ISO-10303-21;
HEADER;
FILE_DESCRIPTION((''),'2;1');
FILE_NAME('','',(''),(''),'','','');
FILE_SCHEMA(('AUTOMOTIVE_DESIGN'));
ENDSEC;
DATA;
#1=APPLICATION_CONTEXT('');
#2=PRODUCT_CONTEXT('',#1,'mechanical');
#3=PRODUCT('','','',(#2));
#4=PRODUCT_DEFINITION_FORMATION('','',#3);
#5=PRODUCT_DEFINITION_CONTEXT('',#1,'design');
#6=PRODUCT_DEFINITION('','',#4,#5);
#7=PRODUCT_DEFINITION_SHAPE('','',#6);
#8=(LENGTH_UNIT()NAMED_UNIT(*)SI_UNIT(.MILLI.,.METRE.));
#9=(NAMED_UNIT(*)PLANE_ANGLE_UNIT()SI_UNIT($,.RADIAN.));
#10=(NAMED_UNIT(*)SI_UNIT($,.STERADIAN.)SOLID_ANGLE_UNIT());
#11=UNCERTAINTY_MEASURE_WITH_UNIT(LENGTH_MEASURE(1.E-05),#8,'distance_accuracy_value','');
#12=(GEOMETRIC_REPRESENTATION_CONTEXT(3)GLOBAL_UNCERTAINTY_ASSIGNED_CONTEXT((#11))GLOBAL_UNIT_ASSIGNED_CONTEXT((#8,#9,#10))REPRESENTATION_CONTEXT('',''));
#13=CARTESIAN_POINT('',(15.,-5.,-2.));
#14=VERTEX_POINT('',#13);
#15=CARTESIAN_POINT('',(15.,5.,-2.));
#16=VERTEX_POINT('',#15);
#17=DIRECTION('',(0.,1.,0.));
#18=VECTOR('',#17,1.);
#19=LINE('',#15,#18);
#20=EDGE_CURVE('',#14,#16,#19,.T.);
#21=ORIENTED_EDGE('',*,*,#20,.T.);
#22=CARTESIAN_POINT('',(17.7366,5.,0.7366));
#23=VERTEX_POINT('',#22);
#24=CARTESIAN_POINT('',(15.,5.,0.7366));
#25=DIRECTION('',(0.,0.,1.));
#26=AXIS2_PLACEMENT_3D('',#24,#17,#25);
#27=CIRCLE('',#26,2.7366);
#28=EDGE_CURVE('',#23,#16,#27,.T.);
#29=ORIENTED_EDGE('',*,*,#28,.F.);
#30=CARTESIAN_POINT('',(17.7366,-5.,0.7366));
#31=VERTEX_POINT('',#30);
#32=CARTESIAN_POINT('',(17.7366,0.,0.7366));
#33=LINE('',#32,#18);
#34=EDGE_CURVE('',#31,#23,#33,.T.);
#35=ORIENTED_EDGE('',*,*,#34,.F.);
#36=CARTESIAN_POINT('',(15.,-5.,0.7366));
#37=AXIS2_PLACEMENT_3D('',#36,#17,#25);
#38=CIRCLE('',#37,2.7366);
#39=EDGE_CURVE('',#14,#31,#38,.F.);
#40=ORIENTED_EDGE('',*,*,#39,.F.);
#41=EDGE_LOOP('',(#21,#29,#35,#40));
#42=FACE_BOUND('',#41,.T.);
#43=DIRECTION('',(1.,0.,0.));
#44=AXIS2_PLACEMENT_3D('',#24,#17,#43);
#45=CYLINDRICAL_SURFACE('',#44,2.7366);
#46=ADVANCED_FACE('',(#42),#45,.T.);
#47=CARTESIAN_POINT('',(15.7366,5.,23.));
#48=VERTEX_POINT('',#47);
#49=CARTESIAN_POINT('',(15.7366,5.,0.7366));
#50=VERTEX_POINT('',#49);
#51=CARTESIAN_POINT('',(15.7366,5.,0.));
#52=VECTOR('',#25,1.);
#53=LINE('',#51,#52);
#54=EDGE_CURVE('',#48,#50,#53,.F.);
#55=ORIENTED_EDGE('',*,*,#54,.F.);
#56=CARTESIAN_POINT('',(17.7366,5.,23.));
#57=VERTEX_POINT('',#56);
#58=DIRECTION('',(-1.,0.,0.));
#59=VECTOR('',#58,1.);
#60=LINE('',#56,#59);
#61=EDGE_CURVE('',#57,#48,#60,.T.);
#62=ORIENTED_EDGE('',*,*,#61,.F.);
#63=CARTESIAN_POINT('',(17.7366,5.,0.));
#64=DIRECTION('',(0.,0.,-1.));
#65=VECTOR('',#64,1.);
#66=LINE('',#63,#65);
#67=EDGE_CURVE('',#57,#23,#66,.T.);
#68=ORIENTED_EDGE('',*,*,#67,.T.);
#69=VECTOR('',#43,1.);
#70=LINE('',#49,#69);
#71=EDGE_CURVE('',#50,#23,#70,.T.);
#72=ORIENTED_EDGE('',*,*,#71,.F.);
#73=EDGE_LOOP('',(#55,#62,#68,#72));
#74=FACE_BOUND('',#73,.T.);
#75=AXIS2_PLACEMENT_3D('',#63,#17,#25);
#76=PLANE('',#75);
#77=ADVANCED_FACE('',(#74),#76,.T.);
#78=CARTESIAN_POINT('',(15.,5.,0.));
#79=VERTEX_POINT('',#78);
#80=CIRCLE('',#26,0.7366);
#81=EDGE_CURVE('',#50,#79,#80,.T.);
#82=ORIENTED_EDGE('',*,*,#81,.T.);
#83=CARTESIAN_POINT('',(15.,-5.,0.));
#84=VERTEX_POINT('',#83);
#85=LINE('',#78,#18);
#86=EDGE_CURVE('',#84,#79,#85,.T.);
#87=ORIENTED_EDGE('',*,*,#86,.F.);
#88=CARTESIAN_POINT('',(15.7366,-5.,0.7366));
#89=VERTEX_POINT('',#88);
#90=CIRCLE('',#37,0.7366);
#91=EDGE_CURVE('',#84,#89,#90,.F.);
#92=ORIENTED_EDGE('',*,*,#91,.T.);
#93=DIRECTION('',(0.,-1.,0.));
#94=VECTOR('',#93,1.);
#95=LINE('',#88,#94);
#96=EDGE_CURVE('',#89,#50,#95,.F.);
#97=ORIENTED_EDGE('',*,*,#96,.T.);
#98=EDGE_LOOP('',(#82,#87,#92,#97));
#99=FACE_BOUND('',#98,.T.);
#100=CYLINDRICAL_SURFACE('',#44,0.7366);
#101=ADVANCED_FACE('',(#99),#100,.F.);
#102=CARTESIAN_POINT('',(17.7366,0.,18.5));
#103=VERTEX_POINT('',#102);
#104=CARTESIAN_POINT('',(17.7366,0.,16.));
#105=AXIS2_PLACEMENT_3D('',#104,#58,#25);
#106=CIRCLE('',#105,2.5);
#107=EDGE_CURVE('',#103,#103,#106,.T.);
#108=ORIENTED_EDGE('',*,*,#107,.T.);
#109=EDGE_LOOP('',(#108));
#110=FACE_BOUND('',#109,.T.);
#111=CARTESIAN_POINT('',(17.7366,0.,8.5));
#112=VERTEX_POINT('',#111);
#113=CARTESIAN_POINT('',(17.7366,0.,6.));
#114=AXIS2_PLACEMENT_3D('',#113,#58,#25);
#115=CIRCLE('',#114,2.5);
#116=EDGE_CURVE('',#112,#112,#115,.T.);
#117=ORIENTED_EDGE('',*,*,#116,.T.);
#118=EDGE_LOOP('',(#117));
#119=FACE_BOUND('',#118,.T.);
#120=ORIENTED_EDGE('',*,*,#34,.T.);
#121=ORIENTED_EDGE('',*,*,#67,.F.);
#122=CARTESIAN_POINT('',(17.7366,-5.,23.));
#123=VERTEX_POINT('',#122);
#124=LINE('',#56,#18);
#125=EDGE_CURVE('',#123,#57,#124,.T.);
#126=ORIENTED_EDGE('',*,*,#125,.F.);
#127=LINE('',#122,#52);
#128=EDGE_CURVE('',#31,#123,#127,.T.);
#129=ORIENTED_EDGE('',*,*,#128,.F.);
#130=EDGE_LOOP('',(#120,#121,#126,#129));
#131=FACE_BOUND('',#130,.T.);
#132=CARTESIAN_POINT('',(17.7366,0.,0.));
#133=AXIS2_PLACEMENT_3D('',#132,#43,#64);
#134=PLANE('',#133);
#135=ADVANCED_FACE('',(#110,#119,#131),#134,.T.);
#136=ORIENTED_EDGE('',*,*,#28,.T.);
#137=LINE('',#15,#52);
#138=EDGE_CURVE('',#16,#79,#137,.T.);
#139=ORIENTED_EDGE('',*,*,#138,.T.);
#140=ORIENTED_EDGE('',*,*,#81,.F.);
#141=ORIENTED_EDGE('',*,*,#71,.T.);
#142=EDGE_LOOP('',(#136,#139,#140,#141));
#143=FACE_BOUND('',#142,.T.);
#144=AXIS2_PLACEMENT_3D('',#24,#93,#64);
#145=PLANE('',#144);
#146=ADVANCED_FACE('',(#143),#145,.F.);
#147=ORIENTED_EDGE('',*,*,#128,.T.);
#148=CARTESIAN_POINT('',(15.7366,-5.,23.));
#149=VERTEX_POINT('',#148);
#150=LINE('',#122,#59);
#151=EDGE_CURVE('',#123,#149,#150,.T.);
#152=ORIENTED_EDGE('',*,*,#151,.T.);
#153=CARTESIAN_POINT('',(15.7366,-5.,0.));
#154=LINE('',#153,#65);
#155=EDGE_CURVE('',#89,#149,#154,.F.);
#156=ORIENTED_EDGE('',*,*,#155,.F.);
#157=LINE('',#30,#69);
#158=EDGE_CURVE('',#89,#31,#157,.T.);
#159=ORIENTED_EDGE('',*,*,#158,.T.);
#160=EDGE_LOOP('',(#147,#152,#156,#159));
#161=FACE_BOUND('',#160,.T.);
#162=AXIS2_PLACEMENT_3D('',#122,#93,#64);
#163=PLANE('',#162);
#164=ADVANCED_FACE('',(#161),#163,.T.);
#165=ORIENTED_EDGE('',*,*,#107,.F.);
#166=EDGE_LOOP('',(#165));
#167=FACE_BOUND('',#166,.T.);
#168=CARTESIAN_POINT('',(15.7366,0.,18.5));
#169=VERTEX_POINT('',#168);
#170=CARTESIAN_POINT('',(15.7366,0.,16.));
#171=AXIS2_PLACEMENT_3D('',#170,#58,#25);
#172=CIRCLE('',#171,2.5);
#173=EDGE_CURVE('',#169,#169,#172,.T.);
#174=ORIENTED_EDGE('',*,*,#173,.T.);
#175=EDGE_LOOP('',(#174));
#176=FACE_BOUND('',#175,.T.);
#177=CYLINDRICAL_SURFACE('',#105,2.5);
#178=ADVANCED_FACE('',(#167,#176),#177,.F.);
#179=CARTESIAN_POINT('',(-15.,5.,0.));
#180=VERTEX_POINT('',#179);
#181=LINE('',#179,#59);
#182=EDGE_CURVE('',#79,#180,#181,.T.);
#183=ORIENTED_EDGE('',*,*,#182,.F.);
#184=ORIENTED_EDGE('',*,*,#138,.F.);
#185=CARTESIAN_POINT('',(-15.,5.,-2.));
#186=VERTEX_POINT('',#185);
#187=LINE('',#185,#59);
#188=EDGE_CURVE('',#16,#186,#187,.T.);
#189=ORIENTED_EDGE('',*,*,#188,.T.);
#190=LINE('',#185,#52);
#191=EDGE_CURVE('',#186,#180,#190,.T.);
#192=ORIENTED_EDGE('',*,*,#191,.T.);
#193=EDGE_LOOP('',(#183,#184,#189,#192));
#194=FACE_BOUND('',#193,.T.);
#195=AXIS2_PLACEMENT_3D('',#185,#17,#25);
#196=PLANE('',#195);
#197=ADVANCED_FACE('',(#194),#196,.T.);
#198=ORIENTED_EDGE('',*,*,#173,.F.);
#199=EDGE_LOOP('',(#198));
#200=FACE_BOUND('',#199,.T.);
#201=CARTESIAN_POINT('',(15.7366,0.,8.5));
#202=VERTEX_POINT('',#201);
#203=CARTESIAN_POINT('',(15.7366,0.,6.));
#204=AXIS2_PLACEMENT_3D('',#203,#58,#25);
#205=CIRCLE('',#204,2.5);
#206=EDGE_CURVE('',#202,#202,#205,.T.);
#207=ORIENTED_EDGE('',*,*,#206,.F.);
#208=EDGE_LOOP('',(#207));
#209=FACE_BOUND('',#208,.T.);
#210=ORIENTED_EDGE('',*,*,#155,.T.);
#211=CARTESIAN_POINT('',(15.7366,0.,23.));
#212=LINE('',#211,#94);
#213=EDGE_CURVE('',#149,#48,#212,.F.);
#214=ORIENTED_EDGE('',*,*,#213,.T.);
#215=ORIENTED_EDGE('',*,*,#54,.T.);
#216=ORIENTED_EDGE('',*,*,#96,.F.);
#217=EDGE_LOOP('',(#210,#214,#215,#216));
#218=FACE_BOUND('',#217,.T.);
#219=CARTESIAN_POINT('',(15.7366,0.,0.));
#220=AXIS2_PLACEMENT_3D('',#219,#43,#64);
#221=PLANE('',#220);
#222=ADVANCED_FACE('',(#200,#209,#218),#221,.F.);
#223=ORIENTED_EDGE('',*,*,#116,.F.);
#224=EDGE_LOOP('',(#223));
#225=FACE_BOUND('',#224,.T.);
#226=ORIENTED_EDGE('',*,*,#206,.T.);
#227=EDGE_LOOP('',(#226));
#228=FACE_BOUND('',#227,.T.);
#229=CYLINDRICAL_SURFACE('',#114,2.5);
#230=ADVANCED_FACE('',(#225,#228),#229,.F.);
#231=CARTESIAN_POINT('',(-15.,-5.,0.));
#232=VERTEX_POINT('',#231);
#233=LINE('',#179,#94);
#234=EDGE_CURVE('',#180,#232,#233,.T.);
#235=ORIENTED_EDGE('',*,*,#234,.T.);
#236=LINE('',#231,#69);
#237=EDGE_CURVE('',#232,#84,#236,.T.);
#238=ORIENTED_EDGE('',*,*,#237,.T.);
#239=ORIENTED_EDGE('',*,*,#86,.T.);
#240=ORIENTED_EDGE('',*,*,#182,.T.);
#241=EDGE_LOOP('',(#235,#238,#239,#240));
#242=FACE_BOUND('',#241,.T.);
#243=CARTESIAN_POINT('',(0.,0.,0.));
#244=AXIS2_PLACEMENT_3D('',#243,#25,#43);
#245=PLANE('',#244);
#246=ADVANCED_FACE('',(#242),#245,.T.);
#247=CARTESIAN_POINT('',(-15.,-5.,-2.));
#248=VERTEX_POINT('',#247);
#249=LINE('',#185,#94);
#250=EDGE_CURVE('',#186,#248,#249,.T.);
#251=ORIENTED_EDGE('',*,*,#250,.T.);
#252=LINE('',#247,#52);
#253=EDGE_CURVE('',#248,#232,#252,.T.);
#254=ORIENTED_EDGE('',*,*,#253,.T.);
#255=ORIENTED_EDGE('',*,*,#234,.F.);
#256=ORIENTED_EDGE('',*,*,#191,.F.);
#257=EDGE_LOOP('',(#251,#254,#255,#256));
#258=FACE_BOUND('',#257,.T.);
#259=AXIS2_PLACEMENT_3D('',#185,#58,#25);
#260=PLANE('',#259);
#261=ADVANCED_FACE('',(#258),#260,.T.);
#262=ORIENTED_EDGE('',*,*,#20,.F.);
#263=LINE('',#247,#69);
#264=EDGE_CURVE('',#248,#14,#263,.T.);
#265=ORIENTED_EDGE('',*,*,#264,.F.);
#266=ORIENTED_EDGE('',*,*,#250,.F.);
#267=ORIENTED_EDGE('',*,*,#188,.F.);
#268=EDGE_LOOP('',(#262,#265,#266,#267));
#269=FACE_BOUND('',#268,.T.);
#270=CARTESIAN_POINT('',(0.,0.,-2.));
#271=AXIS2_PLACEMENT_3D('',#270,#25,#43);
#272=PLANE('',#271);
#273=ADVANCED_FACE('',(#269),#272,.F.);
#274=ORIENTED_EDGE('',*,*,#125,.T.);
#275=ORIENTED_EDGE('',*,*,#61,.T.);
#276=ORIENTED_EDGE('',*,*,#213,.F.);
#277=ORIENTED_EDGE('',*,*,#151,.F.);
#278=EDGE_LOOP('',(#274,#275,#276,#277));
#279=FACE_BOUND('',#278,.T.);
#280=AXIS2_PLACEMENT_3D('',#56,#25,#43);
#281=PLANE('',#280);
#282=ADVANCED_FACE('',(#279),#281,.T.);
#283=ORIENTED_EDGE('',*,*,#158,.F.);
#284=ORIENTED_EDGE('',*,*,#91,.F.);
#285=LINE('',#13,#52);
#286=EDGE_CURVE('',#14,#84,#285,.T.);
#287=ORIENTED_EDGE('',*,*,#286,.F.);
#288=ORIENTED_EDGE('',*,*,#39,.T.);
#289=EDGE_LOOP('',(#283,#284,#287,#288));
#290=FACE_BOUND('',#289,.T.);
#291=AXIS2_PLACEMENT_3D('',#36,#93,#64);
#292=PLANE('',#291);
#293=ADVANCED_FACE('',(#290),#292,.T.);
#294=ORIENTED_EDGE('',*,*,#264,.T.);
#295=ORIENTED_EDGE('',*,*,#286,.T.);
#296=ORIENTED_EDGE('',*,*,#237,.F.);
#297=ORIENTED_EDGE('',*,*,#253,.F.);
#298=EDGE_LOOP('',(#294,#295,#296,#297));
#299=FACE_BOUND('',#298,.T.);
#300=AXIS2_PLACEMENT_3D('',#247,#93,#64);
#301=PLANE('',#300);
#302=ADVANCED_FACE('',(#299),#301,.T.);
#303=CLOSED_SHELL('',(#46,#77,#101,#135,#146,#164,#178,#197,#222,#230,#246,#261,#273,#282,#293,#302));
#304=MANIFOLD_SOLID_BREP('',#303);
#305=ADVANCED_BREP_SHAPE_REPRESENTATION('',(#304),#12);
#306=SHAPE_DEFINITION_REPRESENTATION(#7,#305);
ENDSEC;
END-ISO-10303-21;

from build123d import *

# Parameters (mm, degrees)
SKETCH2_W          = 30
SKETCH2_H          = 10
BASE_FLANGE1_DEPTH = 2
EDGE_FLANGE1_DEPTH = 10
SKETCH10_R         = 2.5
CUT_EXTRUDE1_DEPTH = 39.713545169


# Sheet-metal steps are written as plain solids
with BuildPart() as part:
    # Sketch2 → Base-Flange1 (new body)
    with BuildSketch(Plane.XY):
        Rectangle(SKETCH2_W, SKETCH2_H)
    extrude(amount=-BASE_FLANGE1_DEPTH)

    # Edge-Flange1 section (across the edge) → Edge-Flange1 (add)
    with BuildSketch(Plane(origin=(15.7366, -5, 0), x_dir=(-1, 0, 0), z_dir=(0, 1, 0))):
        with BuildLine():
            Line((-2, 0.7366), (-2, 23))
            Line((-2, 23), (0, 23))
            Line((0, 23), (0, 0.7366))
            ThreePointArc((0, 0.7366), (0.215745145, 0.215745145), (0.7366, 0))
            Line((0.7366, 0), (0.7366, -2))
            ThreePointArc((0.7366, -2), (-1.198468417, -1.198468417), (-2, 0.7366))
        make_face()
    extrude(amount=EDGE_FLANGE1_DEPTH)

    # Sketch10 → Cut-Extrude1 (cut, through all)
    with BuildSketch(Plane.ZY.offset(-15.7366)):
        with Locations((6, 0)):
            Circle(SKETCH10_R)
        with Locations((16, 0)):
            Circle(SKETCH10_R)
    extrude(amount=-CUT_EXTRUDE1_DEPTH, mode=Mode.SUBTRACT)


solid = part.part
